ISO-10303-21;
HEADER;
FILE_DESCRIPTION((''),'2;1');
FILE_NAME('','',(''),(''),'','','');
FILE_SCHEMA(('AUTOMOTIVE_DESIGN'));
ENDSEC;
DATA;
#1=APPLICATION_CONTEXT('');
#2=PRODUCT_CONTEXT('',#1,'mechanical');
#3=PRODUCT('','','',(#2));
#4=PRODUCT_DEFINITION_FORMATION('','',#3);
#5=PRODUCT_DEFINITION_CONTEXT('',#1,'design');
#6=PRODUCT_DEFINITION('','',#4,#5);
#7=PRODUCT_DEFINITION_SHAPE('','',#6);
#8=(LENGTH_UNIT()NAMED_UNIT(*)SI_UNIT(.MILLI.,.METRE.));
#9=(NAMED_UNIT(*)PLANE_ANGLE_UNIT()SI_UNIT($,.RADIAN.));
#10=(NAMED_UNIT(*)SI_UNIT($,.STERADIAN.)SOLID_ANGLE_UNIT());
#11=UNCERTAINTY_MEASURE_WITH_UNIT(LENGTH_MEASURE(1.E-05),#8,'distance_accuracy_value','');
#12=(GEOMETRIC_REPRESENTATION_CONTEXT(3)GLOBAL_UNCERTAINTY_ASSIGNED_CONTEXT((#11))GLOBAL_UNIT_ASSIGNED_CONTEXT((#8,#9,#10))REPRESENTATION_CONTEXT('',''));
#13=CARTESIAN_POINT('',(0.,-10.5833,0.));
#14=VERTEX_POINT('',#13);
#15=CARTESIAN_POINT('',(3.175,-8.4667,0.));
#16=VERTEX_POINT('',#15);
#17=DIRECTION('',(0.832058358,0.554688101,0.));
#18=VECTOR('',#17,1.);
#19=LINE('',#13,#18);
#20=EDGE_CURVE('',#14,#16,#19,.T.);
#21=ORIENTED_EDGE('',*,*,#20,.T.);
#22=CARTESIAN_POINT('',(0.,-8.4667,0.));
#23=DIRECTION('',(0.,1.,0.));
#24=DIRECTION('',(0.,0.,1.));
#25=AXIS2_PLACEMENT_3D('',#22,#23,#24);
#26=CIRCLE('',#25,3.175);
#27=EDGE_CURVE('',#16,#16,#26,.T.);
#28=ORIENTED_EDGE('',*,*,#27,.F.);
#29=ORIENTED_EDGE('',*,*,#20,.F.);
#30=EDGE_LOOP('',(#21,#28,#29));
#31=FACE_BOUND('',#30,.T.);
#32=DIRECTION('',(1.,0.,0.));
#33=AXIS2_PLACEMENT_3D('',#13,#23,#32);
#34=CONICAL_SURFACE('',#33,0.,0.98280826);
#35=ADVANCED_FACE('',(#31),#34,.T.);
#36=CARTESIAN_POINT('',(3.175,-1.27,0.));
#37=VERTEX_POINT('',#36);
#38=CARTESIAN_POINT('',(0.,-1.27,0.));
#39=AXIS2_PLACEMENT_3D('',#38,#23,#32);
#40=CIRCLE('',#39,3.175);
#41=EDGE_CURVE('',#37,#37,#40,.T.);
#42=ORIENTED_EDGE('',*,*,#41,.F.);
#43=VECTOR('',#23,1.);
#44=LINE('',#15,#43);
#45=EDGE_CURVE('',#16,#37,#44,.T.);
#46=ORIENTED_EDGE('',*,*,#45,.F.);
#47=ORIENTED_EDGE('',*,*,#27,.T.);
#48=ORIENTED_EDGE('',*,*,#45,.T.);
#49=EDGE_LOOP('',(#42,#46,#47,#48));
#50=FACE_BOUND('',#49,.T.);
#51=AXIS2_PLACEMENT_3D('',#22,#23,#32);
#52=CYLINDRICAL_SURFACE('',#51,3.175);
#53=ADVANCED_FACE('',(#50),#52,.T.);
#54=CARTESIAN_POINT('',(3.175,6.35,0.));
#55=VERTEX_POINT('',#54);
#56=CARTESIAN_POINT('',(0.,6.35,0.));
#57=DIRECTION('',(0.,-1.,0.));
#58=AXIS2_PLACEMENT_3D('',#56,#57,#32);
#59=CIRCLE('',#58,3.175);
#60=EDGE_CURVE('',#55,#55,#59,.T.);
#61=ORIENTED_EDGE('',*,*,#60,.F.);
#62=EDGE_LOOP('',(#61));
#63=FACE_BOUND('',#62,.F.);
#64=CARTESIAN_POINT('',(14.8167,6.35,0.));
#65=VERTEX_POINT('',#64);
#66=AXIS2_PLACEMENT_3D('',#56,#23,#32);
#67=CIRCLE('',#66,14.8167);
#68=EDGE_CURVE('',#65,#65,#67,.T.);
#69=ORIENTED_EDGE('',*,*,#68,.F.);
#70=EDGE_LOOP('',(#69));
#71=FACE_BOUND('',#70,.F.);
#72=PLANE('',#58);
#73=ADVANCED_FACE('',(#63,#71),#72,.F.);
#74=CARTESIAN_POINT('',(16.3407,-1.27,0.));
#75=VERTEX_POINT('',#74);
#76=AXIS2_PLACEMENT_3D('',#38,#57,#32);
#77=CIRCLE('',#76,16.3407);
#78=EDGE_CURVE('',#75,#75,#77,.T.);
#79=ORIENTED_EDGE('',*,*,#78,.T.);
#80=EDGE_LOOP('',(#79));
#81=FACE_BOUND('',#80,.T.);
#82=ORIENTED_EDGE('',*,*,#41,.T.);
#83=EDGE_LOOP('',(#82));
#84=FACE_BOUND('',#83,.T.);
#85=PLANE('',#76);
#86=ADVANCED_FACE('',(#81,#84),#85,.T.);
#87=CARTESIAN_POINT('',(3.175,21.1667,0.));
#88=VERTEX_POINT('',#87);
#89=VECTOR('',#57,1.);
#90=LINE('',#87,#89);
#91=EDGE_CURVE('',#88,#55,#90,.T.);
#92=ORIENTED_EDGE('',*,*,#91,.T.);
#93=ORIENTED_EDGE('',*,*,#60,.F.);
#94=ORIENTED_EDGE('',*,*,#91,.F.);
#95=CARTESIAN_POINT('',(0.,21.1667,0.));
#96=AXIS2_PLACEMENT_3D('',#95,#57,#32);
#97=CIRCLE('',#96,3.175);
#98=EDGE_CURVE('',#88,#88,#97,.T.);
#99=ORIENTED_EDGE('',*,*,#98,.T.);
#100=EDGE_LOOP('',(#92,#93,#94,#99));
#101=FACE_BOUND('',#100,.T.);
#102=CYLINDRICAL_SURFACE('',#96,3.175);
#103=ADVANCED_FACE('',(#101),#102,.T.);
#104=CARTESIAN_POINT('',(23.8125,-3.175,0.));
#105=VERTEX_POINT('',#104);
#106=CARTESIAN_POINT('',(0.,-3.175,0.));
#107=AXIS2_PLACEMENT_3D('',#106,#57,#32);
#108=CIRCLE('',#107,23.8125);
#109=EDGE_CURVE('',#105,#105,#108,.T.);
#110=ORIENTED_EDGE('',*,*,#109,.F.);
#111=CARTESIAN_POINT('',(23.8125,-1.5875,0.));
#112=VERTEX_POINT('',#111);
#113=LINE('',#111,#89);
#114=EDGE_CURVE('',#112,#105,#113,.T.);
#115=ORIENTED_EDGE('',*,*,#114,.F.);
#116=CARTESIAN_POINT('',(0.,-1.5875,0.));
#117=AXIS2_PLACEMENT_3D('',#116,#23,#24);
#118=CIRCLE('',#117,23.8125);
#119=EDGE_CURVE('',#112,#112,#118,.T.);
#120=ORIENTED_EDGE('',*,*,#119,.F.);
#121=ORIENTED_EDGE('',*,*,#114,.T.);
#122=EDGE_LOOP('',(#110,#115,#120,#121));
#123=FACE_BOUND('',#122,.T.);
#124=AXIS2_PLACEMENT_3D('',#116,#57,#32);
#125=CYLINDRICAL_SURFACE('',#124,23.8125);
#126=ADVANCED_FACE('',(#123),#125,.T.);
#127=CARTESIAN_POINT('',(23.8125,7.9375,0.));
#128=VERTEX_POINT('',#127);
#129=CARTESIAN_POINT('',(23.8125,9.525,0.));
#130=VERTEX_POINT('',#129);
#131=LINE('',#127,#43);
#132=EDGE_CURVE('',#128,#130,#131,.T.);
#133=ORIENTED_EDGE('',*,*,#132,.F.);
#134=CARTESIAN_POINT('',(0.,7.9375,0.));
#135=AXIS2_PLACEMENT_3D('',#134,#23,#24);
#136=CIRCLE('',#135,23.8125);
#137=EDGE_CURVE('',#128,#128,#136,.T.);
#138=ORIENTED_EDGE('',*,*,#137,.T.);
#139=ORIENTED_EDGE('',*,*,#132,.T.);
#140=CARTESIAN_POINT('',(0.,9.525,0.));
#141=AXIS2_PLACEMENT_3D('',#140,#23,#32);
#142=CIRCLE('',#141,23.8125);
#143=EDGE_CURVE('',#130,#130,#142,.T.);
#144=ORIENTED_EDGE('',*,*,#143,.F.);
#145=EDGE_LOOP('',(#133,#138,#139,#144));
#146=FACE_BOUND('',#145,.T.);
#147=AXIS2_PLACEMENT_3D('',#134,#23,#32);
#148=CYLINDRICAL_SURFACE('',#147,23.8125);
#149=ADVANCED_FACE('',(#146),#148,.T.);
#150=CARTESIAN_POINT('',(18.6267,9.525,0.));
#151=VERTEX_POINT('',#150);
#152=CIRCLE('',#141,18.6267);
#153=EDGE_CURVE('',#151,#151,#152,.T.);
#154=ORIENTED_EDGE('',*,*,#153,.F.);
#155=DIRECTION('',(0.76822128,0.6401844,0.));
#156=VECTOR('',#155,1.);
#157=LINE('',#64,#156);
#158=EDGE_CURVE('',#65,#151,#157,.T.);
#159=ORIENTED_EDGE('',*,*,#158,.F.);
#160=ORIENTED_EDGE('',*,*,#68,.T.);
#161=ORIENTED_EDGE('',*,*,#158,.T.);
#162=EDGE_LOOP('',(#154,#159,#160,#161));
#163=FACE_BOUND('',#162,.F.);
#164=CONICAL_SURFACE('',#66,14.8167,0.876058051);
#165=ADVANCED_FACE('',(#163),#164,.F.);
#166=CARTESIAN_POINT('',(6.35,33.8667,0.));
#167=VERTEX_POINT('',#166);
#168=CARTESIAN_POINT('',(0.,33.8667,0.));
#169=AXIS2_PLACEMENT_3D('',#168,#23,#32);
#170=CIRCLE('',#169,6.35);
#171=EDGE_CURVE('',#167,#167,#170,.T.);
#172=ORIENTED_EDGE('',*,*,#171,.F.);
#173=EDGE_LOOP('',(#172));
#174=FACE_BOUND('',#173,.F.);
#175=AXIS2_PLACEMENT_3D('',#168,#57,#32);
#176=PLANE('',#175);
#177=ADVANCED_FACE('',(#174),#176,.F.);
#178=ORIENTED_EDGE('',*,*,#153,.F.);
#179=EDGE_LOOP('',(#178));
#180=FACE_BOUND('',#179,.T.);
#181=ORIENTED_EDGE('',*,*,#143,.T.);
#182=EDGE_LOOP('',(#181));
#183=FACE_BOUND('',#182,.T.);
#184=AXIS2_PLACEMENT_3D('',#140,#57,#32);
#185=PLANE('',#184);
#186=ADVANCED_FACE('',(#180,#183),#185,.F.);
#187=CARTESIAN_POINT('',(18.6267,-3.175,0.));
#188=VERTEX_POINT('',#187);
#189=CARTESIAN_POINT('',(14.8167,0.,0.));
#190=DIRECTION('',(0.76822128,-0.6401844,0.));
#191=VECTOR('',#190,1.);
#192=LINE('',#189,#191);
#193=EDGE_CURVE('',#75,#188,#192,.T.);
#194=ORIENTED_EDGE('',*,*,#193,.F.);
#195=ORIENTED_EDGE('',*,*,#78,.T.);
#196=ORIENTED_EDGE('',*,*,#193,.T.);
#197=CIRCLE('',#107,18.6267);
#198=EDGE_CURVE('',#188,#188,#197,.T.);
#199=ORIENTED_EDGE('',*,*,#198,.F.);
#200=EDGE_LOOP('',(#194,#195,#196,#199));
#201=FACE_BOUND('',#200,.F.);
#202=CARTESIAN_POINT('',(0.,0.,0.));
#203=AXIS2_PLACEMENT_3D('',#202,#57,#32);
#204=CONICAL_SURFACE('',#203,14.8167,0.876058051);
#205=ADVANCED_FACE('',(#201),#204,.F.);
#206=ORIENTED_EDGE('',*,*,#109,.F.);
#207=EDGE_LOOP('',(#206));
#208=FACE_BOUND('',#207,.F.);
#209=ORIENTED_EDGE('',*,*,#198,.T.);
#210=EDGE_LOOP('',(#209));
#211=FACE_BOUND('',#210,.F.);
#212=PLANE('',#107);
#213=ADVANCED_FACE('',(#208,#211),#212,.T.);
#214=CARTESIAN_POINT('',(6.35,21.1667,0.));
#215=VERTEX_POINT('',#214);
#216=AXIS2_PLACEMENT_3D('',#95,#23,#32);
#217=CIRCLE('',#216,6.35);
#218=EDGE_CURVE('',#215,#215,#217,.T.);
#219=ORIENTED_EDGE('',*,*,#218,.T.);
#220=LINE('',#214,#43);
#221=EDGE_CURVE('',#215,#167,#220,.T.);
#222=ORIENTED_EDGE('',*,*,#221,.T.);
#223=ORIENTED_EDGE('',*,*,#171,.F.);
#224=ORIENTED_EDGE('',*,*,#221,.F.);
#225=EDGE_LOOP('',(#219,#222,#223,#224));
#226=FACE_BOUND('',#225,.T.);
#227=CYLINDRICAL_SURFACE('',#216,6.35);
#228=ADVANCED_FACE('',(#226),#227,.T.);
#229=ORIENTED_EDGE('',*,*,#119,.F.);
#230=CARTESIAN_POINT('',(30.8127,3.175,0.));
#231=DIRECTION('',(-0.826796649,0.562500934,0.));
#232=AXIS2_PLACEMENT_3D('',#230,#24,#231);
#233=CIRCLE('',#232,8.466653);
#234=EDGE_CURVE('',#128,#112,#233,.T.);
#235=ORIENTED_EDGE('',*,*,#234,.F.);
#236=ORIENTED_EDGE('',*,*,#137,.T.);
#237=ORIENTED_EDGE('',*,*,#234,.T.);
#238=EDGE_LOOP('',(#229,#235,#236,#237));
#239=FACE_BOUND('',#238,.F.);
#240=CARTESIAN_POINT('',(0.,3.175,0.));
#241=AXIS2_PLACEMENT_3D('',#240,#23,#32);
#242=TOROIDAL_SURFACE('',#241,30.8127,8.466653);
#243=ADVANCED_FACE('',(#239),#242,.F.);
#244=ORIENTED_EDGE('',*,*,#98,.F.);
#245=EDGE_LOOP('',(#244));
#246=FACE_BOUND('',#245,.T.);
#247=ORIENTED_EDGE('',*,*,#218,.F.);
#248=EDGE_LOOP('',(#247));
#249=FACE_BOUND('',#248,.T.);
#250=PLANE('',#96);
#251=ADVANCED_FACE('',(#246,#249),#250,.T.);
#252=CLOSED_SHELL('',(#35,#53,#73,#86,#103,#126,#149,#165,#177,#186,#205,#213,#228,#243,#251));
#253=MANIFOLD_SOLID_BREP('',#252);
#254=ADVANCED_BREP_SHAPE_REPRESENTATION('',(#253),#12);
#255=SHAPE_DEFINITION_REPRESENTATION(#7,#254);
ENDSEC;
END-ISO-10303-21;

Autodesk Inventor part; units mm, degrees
ref_plane "YZ Plane" through (0, 0, 0) normal (1, 0, 0) x (0, 1, 0)
ref_plane "XZ Plane" through (0, 0, 0) normal (0, 1, 0) x (-1, 0, 0)
ref_plane "XY Plane" through (0, 0, 0) normal (0, 0, 1) x (1, 0, 0)
sketch "Sketch1" plane through (0, 0, 0) normal (0, 0, 1) x (1, 0, 0)
  line L0 (0, 0) -> (0, 21.1667)
  line L1 (0, 0) -> (0, -10.5833)
  line L2 (0, 21.1667) -> (0, 33.8667)
  line L3 (6.35, 21.1667) -> (6.35, 33.8667)
  line L4 (6.35, 33.8667) -> (0, 33.8667)
  line L5 (3.175, 12.7991) -> (0, 12.7991) construction
  line L6 (6.35, 21.1667) -> (3.175, 21.1667)
  line L7 (3.175, 21.1667) -> (0, 21.1667) construction
  line L8 (0, 0) -> (3.175, 0) construction
  line L9 (3.175, 0) -> (17.91, 0) construction
  line L10 (23.8125, 7.9375) -> (23.8125, 9.525)
  line L11 (14.8167, 6.35) -> (3.175, 6.35)
  line L12 (18.6267, 9.525) -> (23.8125, 9.525)
  line L13 (0, -10.5833) -> (3.175, -8.4667)
  line L14 (3.175, -8.4667) -> (3.175, 0)
  line L15 (14.8167, 6.35) -> (18.6267, 9.525)
  line L16 (3.175, 21.1667) -> (3.175, 6.35)
  line L17 (1.0583, 6.35) -> (3.175, 6.35) construction
  line L18 (1.0583, 6.35) -> (1.0583, 3.175) construction
  line L19 (1.0583, 3.175) -> (5.214, 3.175) construction
  line L20 (23.8125, -1.5875) -> (23.8125, -3.175)
  line L21 (14.8167, 0) -> (3.175, 0)
  line L22 (18.6267, -3.175) -> (23.8125, -3.175)
  line L23 (14.8167, 0) -> (18.6267, -3.175)
  line L24 (3.175, 0) -> (3.175, 0)
  arc A0 (23.8125, 7.9375) -> (23.8125, -1.5875) centre (30.8127, 3.175) ccw
  line L25 (23.8125, -3.175) -> (23.495, -3.175)
  dimension "d5" = 44.45
  dimension "d6" = 12.7
  dimension "d7" = 6.35
  dimension "d12" = 2.1167
  dimension "d13" = 3.175
  dimension "d15" = 8.4667
  dimension "d18" = 1.5875
  dimension "d20" = 3.175
  dimension "d21" = 3.81
  dimension "d26" = 23.8125
  dimension "d30" = 11.6417
  dimension "d31" = 3.175
  dimension "d32" = 2.1167
  dimension "d33" = 8.4667
  dimension "d34" = 3.175
  dimension "d36" = 0.3175
revolve "Revolution1" add sketch "Sketch1" angle 360 about axis through (0, 21.1667, 0) along (0, -1, 0)
move faces "Move1" translate (0, -1.27, 0) faces at (10.7618, 0, -1.4352)
properties part number "Top Spoolish"
